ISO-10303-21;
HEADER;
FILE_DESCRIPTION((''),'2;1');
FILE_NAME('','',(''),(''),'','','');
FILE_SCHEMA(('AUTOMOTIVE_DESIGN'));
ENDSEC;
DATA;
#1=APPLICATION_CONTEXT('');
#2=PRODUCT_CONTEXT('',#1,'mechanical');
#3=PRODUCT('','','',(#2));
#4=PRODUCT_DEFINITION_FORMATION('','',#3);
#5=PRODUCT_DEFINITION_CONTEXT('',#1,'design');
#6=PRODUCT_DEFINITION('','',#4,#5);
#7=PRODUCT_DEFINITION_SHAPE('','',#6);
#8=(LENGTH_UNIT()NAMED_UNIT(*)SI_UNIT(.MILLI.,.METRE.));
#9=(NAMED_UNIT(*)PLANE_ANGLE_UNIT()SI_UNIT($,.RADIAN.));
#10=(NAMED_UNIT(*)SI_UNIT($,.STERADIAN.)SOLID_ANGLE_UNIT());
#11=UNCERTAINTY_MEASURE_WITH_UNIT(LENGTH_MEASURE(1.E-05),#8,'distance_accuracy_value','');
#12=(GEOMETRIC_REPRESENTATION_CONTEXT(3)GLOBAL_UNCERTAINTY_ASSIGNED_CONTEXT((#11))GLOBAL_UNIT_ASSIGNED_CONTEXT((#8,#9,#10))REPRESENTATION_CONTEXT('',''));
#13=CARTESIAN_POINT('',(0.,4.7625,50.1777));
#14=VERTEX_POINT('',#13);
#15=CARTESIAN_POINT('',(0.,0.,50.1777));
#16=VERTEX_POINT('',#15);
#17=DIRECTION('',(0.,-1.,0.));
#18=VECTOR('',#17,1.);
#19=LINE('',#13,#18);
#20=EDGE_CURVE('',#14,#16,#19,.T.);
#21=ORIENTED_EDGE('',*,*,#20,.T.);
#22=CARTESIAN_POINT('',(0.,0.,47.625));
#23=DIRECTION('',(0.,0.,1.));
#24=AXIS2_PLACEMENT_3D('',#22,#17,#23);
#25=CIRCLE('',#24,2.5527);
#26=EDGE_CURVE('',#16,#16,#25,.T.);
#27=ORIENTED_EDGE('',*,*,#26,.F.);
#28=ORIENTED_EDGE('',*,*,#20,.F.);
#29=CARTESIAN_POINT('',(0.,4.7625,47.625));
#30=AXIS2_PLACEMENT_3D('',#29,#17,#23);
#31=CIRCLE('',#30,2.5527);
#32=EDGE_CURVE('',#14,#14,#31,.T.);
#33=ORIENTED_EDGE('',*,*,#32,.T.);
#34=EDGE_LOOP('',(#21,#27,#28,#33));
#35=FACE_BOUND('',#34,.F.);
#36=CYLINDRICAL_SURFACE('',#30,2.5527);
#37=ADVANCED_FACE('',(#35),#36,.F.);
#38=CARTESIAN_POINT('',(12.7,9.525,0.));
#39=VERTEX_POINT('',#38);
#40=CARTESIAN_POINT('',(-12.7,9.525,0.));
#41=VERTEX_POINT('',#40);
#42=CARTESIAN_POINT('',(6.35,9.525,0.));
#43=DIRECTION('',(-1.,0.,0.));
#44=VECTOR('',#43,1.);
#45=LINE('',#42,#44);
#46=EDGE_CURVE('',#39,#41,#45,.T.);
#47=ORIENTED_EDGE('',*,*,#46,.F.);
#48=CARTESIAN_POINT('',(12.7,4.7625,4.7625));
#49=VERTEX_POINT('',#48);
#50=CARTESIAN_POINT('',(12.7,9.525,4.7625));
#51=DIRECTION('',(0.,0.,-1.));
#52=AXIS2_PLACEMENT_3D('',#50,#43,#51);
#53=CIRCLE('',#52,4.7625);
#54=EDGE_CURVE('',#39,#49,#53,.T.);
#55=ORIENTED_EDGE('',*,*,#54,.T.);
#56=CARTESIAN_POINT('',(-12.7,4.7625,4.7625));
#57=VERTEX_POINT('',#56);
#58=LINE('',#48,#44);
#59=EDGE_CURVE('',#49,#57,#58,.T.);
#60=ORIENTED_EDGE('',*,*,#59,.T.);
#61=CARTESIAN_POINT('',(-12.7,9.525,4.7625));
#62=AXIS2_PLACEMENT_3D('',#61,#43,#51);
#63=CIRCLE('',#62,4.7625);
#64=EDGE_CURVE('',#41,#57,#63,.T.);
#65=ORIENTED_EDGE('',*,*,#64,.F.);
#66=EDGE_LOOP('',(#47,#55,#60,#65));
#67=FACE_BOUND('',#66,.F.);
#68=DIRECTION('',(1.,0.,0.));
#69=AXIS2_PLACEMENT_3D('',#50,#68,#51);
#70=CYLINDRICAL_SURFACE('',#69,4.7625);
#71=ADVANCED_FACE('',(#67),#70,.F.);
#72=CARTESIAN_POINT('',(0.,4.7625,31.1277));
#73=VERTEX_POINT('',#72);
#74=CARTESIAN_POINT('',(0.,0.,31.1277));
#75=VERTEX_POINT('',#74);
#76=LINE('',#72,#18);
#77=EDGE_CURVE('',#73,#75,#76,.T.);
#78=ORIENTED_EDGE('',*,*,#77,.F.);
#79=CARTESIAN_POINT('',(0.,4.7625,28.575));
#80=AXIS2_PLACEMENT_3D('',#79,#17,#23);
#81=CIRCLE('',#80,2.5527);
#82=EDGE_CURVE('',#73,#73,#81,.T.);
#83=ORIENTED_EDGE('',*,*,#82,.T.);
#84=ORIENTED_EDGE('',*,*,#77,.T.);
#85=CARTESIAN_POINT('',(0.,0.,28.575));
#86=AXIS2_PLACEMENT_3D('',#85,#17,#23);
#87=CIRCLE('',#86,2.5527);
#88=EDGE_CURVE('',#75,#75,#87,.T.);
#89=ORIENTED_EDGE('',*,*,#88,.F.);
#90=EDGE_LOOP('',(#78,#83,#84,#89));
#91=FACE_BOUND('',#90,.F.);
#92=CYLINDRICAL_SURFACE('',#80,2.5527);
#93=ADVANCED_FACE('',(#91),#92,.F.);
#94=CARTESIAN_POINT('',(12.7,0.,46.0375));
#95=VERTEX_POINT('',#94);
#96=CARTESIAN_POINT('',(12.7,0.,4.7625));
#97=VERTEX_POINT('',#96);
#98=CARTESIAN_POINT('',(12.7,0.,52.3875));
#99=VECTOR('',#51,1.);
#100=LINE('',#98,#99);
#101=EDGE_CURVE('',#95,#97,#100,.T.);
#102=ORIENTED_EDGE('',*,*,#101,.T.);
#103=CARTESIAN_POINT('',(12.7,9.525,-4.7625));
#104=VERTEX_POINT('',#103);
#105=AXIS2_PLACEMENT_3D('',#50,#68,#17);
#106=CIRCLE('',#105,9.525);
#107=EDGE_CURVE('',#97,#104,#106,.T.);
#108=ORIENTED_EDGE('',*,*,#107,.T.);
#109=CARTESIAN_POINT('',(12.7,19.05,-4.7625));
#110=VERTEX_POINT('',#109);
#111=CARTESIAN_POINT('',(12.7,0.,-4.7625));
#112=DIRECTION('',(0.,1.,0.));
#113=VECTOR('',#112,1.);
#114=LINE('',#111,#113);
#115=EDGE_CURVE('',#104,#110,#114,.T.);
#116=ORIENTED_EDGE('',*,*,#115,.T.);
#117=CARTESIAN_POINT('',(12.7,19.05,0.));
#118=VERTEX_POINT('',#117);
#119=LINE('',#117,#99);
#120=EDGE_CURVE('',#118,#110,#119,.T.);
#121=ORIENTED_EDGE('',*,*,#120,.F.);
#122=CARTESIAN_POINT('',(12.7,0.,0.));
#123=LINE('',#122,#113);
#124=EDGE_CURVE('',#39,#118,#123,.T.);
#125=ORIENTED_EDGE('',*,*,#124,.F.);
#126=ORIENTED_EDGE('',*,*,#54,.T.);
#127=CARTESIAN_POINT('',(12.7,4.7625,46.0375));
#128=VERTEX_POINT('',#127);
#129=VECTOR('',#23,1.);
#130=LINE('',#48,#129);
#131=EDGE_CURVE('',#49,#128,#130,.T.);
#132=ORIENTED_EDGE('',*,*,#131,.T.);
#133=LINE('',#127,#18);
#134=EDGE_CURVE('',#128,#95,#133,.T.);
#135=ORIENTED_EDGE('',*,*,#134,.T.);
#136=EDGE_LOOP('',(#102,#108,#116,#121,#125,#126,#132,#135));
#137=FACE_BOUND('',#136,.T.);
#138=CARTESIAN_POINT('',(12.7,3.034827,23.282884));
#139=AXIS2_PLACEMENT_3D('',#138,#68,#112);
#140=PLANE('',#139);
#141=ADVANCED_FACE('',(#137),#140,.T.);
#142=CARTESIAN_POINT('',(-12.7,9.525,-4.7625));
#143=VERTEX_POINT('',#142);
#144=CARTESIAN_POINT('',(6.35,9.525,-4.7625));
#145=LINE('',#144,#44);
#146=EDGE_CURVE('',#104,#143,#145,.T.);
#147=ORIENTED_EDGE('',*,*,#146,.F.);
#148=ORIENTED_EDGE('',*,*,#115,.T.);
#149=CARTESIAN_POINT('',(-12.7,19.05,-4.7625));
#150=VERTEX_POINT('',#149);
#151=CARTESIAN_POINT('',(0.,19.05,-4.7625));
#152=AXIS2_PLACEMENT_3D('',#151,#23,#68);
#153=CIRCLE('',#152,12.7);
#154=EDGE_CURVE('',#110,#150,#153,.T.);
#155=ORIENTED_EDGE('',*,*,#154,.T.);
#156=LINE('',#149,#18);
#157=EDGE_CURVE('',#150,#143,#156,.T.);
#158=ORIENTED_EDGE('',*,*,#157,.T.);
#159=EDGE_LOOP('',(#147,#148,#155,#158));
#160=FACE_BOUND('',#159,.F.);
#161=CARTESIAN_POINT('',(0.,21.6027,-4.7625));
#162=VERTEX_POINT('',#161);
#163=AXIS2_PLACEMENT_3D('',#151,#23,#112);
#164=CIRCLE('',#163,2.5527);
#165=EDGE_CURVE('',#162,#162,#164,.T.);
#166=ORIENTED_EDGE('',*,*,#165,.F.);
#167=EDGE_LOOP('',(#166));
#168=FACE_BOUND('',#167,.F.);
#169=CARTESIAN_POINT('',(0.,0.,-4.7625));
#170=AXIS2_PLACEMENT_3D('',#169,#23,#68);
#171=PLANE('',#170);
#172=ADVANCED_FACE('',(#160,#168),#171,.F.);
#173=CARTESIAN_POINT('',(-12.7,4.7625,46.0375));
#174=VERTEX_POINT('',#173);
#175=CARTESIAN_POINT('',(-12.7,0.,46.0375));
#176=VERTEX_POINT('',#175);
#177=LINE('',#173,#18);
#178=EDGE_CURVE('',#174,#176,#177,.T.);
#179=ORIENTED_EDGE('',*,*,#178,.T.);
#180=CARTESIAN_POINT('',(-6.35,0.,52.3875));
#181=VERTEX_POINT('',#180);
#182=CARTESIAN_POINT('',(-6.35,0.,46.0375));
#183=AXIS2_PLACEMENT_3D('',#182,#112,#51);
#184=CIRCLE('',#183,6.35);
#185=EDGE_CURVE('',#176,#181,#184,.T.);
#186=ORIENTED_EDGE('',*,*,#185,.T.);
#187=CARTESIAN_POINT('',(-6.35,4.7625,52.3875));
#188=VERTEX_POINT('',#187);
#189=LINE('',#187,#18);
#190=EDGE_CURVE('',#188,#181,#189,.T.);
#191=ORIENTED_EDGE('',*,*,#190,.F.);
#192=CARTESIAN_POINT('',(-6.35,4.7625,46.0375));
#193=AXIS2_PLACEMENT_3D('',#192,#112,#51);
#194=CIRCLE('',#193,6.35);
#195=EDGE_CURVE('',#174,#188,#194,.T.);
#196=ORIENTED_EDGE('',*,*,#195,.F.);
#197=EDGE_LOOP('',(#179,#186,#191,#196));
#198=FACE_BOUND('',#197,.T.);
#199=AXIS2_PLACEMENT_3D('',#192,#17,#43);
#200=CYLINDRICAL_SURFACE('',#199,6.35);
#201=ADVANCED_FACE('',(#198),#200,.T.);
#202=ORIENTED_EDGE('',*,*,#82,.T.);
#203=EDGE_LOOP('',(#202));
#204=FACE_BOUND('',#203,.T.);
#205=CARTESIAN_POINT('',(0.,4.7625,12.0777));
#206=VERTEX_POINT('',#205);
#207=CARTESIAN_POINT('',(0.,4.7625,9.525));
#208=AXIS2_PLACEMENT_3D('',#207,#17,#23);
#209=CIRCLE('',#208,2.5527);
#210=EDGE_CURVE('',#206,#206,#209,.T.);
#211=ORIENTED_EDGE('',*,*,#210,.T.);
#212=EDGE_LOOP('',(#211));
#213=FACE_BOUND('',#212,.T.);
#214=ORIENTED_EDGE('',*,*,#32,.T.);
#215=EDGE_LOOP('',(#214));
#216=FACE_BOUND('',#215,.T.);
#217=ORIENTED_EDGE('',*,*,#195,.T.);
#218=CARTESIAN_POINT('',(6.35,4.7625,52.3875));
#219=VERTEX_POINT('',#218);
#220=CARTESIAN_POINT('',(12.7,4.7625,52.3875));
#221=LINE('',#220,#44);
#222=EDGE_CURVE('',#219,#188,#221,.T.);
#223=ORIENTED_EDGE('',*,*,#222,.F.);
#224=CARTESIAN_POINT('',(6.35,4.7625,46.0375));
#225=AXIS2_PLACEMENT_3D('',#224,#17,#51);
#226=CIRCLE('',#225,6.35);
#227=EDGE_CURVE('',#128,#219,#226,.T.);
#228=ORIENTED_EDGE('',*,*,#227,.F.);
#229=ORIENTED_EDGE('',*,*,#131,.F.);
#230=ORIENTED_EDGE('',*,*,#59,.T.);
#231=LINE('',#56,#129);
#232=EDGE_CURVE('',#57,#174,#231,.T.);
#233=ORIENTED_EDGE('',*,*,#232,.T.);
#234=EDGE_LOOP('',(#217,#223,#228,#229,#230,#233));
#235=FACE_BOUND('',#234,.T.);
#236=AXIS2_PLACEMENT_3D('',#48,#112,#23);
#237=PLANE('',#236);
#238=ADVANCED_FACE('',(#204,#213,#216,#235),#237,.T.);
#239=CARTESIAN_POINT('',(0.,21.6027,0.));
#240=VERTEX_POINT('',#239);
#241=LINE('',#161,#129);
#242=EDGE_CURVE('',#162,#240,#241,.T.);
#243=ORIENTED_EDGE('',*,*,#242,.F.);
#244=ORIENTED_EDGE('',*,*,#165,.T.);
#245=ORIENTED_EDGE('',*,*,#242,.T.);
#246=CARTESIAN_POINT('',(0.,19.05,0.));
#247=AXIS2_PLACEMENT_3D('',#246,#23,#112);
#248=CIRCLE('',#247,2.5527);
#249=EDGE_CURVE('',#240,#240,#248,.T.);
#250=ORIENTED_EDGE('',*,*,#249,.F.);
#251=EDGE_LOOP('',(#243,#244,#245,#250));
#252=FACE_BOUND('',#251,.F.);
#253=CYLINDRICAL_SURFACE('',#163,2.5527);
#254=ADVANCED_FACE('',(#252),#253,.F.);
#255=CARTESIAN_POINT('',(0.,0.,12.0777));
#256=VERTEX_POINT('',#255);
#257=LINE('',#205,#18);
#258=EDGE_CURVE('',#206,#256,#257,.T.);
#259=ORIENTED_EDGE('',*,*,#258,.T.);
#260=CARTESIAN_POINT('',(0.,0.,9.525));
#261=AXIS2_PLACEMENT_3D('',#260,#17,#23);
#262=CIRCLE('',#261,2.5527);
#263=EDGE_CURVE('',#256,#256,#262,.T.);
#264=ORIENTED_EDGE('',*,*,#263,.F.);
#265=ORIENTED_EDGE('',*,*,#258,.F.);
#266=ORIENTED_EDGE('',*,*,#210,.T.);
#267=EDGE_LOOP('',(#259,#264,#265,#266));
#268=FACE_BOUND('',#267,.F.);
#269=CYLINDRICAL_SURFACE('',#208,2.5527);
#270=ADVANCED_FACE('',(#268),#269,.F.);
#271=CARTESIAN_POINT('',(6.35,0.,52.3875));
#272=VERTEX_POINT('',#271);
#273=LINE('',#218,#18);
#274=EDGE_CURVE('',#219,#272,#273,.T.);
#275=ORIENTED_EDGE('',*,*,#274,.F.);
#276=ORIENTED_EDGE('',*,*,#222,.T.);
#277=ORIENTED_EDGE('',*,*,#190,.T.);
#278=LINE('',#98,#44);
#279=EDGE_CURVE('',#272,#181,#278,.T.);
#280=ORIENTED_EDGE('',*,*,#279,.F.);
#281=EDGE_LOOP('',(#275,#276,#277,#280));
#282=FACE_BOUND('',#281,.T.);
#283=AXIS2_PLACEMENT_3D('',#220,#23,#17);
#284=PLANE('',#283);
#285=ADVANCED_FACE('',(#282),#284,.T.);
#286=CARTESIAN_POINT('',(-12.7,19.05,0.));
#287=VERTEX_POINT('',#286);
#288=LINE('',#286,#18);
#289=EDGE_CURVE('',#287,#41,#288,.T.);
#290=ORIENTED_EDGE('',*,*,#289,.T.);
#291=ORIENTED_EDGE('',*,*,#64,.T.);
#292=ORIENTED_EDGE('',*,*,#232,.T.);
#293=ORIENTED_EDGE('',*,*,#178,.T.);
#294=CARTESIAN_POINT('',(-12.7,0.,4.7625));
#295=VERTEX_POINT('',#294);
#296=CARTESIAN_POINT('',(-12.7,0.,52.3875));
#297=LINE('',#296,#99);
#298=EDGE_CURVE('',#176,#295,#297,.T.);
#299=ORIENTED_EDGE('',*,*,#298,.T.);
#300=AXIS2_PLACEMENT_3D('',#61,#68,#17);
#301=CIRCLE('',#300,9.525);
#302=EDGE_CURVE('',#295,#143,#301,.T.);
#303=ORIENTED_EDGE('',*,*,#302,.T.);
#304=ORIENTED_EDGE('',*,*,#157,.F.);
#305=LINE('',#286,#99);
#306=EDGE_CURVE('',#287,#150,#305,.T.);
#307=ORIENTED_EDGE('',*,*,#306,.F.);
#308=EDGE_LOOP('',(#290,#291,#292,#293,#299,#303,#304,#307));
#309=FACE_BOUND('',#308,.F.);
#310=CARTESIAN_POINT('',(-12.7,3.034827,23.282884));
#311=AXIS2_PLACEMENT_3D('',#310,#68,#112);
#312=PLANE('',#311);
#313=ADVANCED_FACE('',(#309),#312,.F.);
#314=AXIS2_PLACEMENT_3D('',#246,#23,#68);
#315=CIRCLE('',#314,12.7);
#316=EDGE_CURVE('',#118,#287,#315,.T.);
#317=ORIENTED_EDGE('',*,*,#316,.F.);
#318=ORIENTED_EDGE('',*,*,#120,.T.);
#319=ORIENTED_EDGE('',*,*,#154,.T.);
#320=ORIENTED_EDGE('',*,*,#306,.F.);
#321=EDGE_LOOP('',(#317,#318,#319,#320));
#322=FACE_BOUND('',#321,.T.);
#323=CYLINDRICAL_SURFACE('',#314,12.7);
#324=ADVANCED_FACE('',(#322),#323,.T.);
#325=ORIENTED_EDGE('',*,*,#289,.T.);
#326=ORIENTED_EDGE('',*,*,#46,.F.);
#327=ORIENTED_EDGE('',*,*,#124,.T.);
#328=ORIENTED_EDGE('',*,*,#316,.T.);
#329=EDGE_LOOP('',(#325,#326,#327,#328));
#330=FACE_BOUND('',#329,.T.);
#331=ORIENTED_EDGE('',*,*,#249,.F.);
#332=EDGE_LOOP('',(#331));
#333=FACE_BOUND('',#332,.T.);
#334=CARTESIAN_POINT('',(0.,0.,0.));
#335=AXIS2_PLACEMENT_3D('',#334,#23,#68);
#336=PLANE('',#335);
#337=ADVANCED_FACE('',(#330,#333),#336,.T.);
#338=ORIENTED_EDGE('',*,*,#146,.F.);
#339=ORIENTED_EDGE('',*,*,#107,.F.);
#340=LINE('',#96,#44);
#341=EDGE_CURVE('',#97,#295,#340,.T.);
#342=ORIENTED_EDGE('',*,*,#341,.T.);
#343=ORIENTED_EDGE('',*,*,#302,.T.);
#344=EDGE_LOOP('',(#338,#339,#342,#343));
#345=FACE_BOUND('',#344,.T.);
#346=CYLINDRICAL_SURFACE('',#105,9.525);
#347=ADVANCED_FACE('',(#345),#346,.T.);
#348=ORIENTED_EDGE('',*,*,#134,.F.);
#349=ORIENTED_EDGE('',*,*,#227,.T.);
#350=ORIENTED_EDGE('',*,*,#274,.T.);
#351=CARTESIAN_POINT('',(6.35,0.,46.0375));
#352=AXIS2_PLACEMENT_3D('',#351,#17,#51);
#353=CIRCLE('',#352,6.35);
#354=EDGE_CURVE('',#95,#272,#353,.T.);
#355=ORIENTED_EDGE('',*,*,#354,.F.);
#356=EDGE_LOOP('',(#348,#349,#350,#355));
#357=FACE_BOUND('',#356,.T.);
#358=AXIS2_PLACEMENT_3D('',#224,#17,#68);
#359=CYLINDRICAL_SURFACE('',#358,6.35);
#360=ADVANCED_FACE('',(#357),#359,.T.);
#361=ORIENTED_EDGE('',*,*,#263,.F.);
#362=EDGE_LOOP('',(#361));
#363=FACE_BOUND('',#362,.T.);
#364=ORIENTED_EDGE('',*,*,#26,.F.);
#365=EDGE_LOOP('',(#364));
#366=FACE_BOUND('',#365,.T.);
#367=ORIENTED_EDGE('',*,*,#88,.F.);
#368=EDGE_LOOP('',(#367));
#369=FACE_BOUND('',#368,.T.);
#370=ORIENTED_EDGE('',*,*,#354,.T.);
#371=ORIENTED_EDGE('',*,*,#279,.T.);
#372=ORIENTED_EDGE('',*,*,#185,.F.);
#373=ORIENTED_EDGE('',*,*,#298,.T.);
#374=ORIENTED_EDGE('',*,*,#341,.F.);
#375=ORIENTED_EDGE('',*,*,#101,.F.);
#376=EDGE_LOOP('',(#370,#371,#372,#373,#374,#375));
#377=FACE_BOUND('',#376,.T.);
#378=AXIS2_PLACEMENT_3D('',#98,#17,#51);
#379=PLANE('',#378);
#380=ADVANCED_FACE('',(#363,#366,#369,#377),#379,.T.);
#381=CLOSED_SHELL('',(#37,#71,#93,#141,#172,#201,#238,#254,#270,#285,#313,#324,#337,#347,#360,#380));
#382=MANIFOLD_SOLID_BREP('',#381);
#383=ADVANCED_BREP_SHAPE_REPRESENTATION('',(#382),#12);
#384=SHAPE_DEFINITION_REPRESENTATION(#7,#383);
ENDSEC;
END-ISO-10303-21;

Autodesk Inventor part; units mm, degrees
ref_plane "YZ Plane" through (0, 0, 0) normal (1, 0, 0) x (0, 1, 0)
ref_plane "XZ Plane" through (0, 0, 0) normal (0, 1, 0) x (-1, 0, 0)
ref_plane "XY Plane" through (0, 0, 0) normal (0, 0, 1) x (1, 0, 0)
sketch "Sketch1" plane through (0, 0, 0) normal (0, 0, 1) x (1, 0, 0)
  line L0 (-17.78, 0) -> (17.78, 0) construction
  line L1 (-12.7, 0) -> (12.7, 0)
  line L2 (12.7, 0) -> (12.7, 19.05)
  arc A0 (12.7, 19.05) -> (-12.7, 19.05) centre (0, 19.05) ccw
  line L3 (-12.7, 19.05) -> (-12.7, 0)
  point P0 (0, 0)
  dimension "d0" = 25.4
  dimension "d1" = 19.05
extrude "Plate1" add sketch "Sketch1" against normal blind 4.7625
sketch "Sketch2" plane through (12.7, 4.7625, -4.7625) normal (0, -1, 0) x (1, 0, 0)
  line L0 (-25.4, 0) -> (0, 0)
  line L1 (0, 0) -> (0, 57.15)
  line L2 (0, 57.15) -> (-25.4, 57.15)
  line L3 (-25.4, 57.15) -> (-25.4, 0)
edge flange "Flange1" height 57.15 angle 90 thickness 4.7625 bend radius 4.7625 thickness toward (0, -1, 0) relief tear relief width 4.7625 relief depth 2.3813 edges at (0, 0, 0) wall of the first edge with corners at (-12.7, 4.7625, -4.7625) (12.7, 4.7625, -4.7625) (12.7, 4.7625, 52.3875) (-12.7, 4.7625, 52.3875)
bend "Bend1"
corner "Corner1"
sketch "Sketch3" plane through (0, 0, -4.7625) normal (0, 0, -1) x (-1, 0, 0)
  arc A0 (12.7, 19.05) -> (-12.7, 19.05) centre (0, 19.05) ccw construction
  point P0 (0, 0)
hole "Hole1" at (0, 19.05, -4.7625) direction (0, 0, 1) diameter 5.1054 end through all clearance for "Flat Head Machine Screw (82)" size "#10" standard "Ansi Unified Screw Threads"
sketch "Sketch4" plane through (-12.7, 4.7625, 52.3875) normal (0, 1, 0) x (1, 0, 0)
  line L0 (25.4, 47.625) -> (0, 47.625) construction
  line L1 (0, 47.625) -> (0, 0) construction
  line L2 (0, 0) -> (25.4, 0) construction
  line L3 (25.4, 47.625) -> (25.4, 0) construction
  line L4 (0, 0) -> (25.4, 47.625) construction
  line L5 (12.7, 4.7625) -> (12.7, 42.8625) construction
  point P0 (12.7, 52.3875)
  point P1 (12.7, 23.8125)
  dimension "d22" = 38.1
hole "Hole2" at (0, 4.7625, 47.625) at (0, 4.7625, 28.575) at (0, 4.7625, 9.525) direction (0, -1, 0) diameter 5.1054 end through all clearance for "Flat Head Machine Screw (82)" size "#10" standard "Ansi Unified Screw Threads"
fillet "Corner Round1" radius 6.35 2 edges at (-12.7, 2.3812, 52.3875) (12.7, 2.3812, 52.3875)
equation "\"d20\" = Thickness"
equation "\"d4\" = Thickness"
equation "\"d5\" = BendReliefWidth"
equation "\"d6\" = BendReliefDepth"
equation "\"d7\" = MinimumRemnant"
equation "\"d8\" = TransitionRadius"
equation "\"d11\" = BendRadius"
equation "\"d12\" = CornerReliefSize"
equation "\"d13\" = GapSize"
equation "\"d14\" = JacobiRadiusSize"
equation "\"BendRadius\" = Thickness"
equation "\"BendReliefWidth\" = Thickness"
equation "\"BendReliefDepth\" = 0.5 * Thickness"
equation "\"CornerReliefSize\" = 4 * Thickness"
equation "\"MinimumRemnant\" = 2 * Thickness"
equation "\"TransitionRadius\" = BendRadius"
equation "\"JacobiRadiusSize\" = BendRadius"
equation "\"GapSize\" = Thickness"
equation "\"Thickness\" = 4.7625"
properties part number "MOUNT,KICKER"
